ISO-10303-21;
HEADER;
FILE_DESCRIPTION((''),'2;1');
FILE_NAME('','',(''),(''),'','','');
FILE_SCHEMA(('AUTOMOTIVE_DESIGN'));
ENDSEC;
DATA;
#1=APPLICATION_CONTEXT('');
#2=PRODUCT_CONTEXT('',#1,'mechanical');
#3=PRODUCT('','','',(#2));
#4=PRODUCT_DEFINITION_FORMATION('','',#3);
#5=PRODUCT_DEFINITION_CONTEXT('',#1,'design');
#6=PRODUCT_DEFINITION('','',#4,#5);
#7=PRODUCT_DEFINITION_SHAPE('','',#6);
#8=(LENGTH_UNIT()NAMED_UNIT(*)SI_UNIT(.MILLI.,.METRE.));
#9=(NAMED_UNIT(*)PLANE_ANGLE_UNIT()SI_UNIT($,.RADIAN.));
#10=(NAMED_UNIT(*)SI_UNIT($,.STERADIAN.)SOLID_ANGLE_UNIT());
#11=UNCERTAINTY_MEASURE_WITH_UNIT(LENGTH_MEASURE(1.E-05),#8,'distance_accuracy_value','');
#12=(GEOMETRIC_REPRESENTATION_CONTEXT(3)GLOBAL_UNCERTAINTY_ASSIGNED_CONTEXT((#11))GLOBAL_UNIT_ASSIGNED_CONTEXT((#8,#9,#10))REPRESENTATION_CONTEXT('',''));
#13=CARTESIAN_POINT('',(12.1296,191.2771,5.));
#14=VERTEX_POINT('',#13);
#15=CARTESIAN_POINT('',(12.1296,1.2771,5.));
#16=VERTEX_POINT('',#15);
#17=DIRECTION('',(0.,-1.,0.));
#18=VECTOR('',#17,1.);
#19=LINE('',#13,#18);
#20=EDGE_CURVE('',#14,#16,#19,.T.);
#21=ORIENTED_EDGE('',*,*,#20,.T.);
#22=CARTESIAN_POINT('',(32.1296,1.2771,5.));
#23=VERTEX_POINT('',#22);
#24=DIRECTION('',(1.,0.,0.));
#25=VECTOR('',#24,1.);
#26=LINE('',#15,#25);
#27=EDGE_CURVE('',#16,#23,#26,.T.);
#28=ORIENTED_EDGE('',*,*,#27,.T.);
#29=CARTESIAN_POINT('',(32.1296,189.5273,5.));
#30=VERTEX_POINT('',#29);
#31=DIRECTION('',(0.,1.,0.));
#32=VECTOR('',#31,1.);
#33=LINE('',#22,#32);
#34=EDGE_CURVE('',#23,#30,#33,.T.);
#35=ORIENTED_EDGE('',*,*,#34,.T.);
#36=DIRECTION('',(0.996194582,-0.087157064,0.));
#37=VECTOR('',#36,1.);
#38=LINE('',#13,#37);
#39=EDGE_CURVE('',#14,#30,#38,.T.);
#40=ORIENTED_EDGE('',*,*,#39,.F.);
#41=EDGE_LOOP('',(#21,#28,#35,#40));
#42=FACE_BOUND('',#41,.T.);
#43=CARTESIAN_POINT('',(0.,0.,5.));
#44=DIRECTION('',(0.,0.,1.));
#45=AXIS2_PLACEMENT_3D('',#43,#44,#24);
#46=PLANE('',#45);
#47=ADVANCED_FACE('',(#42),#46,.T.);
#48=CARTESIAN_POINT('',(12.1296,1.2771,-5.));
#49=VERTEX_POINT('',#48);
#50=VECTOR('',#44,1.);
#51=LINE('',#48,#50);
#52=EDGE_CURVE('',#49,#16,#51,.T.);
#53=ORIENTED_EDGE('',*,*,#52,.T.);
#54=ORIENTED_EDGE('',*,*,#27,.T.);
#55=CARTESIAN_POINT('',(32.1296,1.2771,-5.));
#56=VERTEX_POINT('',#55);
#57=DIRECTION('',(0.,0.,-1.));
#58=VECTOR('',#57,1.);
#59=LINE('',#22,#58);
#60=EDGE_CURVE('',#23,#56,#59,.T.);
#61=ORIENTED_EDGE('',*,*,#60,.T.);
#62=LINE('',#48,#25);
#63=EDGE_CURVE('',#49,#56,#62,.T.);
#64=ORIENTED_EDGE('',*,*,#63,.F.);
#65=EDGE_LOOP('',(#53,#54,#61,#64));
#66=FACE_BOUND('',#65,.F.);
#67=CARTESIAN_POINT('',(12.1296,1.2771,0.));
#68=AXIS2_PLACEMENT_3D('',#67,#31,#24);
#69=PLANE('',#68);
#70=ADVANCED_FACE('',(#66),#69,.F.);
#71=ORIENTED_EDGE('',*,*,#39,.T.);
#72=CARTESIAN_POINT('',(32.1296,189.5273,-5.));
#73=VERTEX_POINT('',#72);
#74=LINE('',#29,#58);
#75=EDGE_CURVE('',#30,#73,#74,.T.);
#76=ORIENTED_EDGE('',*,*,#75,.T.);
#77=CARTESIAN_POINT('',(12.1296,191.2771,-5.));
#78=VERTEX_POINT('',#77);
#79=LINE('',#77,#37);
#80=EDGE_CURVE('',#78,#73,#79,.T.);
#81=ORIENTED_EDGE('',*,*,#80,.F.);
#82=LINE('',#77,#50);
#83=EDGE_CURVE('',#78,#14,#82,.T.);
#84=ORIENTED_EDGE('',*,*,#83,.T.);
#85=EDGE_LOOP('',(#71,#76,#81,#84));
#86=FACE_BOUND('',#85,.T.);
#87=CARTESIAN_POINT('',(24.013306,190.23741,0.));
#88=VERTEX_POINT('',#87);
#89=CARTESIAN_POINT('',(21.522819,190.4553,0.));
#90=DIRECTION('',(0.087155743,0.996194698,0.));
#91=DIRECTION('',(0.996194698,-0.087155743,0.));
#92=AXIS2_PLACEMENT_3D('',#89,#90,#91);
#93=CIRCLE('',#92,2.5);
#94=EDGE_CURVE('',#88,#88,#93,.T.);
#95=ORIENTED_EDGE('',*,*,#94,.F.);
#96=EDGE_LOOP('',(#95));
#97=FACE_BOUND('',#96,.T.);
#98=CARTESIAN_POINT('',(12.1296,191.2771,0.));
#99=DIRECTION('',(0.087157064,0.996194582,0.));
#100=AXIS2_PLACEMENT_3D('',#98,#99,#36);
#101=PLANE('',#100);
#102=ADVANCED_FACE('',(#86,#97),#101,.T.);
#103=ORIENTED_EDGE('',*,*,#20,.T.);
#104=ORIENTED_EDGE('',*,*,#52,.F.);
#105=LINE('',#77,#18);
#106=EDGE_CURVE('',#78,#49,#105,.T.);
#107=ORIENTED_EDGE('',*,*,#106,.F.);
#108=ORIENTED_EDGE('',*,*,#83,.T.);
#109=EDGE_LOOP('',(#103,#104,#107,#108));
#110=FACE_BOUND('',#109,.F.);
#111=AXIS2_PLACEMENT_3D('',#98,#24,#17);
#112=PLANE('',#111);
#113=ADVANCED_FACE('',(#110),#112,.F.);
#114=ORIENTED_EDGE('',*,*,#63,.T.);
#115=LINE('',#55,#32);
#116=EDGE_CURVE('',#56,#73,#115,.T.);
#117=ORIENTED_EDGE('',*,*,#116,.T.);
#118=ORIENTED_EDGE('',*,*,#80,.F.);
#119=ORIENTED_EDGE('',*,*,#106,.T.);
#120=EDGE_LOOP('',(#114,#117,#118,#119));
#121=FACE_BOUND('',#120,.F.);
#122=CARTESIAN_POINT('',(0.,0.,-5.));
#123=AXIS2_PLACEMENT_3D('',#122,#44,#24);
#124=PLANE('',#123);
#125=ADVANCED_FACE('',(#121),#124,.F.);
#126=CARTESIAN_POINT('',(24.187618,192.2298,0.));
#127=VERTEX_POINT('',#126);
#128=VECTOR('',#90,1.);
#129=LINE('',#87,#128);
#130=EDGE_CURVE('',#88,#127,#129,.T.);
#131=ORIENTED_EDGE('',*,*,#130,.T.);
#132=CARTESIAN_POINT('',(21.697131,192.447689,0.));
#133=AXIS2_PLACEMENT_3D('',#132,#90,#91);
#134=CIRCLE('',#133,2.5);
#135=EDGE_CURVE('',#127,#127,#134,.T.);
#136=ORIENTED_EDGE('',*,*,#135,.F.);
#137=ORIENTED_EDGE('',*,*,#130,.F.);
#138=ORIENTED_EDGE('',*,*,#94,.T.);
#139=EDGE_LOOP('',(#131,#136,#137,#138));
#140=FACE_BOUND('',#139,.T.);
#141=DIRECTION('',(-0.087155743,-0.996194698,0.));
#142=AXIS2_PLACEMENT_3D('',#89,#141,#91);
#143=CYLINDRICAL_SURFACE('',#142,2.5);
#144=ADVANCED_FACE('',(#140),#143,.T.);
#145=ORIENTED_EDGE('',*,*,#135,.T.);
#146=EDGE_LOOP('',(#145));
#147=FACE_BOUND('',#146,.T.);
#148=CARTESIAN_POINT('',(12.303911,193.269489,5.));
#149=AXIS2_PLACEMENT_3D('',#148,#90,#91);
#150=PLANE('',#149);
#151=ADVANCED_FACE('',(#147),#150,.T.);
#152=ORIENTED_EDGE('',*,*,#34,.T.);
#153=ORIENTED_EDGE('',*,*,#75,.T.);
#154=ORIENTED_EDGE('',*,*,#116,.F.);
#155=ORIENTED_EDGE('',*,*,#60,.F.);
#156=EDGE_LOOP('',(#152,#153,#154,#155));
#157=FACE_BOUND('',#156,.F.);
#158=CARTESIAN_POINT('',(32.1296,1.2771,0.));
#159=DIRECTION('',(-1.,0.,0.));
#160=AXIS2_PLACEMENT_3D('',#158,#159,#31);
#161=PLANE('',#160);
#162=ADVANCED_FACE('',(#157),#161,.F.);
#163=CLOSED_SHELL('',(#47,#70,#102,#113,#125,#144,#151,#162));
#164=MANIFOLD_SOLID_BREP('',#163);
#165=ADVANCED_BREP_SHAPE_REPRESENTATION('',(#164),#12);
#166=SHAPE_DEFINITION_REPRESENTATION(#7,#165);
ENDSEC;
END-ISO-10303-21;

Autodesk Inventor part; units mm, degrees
ref_plane "YZ Plane" through (0, 0, 0) normal (1, 0, 0) x (0, 1, 0)
ref_plane "XZ Plane" through (0, 0, 0) normal (0, 1, 0) x (-1, 0, 0)
ref_plane "XY Plane" through (0, 0, 0) normal (0, 0, 1) x (1, 0, 0)
sketch "Sketch1" plane through (0, 0, 0) normal (0, 0, 1) x (1, 0, 0)
  line L0 (12.1296, 191.2771) -> (12.1296, 1.2771)
  line L1 (12.1296, 1.2771) -> (32.1296, 1.2771)
  line L2 (12.1296, 191.2771) -> (32.1296, 189.5273)
  line L3 (12.1296, 191.2771) -> (39.6219, 191.2771) construction
  line L4 (32.1296, 1.2771) -> (32.1296, 189.5273)
  point P0 (0, 0)
  dimension "d0" = 190
  dimension "d1" = 20
  dimension "d2" = 5
extrude "Extrusion1" add sketch "Sketch1" along normal mid plane 10
sketch "Sketch2" plane through (12.1296, 191.2771, 5) normal (0.0871557, 0.9961947, 0) x (0.9961947, -0.0871557, 0)
  circle A0 centre (9.4291, 5) radius 2.5
  point P0 (4.5875, 5)
  dimension "d7" = 5
extrude "Extrusion2" add sketch "Sketch2" along normal blind 2
properties part number "stand2"
